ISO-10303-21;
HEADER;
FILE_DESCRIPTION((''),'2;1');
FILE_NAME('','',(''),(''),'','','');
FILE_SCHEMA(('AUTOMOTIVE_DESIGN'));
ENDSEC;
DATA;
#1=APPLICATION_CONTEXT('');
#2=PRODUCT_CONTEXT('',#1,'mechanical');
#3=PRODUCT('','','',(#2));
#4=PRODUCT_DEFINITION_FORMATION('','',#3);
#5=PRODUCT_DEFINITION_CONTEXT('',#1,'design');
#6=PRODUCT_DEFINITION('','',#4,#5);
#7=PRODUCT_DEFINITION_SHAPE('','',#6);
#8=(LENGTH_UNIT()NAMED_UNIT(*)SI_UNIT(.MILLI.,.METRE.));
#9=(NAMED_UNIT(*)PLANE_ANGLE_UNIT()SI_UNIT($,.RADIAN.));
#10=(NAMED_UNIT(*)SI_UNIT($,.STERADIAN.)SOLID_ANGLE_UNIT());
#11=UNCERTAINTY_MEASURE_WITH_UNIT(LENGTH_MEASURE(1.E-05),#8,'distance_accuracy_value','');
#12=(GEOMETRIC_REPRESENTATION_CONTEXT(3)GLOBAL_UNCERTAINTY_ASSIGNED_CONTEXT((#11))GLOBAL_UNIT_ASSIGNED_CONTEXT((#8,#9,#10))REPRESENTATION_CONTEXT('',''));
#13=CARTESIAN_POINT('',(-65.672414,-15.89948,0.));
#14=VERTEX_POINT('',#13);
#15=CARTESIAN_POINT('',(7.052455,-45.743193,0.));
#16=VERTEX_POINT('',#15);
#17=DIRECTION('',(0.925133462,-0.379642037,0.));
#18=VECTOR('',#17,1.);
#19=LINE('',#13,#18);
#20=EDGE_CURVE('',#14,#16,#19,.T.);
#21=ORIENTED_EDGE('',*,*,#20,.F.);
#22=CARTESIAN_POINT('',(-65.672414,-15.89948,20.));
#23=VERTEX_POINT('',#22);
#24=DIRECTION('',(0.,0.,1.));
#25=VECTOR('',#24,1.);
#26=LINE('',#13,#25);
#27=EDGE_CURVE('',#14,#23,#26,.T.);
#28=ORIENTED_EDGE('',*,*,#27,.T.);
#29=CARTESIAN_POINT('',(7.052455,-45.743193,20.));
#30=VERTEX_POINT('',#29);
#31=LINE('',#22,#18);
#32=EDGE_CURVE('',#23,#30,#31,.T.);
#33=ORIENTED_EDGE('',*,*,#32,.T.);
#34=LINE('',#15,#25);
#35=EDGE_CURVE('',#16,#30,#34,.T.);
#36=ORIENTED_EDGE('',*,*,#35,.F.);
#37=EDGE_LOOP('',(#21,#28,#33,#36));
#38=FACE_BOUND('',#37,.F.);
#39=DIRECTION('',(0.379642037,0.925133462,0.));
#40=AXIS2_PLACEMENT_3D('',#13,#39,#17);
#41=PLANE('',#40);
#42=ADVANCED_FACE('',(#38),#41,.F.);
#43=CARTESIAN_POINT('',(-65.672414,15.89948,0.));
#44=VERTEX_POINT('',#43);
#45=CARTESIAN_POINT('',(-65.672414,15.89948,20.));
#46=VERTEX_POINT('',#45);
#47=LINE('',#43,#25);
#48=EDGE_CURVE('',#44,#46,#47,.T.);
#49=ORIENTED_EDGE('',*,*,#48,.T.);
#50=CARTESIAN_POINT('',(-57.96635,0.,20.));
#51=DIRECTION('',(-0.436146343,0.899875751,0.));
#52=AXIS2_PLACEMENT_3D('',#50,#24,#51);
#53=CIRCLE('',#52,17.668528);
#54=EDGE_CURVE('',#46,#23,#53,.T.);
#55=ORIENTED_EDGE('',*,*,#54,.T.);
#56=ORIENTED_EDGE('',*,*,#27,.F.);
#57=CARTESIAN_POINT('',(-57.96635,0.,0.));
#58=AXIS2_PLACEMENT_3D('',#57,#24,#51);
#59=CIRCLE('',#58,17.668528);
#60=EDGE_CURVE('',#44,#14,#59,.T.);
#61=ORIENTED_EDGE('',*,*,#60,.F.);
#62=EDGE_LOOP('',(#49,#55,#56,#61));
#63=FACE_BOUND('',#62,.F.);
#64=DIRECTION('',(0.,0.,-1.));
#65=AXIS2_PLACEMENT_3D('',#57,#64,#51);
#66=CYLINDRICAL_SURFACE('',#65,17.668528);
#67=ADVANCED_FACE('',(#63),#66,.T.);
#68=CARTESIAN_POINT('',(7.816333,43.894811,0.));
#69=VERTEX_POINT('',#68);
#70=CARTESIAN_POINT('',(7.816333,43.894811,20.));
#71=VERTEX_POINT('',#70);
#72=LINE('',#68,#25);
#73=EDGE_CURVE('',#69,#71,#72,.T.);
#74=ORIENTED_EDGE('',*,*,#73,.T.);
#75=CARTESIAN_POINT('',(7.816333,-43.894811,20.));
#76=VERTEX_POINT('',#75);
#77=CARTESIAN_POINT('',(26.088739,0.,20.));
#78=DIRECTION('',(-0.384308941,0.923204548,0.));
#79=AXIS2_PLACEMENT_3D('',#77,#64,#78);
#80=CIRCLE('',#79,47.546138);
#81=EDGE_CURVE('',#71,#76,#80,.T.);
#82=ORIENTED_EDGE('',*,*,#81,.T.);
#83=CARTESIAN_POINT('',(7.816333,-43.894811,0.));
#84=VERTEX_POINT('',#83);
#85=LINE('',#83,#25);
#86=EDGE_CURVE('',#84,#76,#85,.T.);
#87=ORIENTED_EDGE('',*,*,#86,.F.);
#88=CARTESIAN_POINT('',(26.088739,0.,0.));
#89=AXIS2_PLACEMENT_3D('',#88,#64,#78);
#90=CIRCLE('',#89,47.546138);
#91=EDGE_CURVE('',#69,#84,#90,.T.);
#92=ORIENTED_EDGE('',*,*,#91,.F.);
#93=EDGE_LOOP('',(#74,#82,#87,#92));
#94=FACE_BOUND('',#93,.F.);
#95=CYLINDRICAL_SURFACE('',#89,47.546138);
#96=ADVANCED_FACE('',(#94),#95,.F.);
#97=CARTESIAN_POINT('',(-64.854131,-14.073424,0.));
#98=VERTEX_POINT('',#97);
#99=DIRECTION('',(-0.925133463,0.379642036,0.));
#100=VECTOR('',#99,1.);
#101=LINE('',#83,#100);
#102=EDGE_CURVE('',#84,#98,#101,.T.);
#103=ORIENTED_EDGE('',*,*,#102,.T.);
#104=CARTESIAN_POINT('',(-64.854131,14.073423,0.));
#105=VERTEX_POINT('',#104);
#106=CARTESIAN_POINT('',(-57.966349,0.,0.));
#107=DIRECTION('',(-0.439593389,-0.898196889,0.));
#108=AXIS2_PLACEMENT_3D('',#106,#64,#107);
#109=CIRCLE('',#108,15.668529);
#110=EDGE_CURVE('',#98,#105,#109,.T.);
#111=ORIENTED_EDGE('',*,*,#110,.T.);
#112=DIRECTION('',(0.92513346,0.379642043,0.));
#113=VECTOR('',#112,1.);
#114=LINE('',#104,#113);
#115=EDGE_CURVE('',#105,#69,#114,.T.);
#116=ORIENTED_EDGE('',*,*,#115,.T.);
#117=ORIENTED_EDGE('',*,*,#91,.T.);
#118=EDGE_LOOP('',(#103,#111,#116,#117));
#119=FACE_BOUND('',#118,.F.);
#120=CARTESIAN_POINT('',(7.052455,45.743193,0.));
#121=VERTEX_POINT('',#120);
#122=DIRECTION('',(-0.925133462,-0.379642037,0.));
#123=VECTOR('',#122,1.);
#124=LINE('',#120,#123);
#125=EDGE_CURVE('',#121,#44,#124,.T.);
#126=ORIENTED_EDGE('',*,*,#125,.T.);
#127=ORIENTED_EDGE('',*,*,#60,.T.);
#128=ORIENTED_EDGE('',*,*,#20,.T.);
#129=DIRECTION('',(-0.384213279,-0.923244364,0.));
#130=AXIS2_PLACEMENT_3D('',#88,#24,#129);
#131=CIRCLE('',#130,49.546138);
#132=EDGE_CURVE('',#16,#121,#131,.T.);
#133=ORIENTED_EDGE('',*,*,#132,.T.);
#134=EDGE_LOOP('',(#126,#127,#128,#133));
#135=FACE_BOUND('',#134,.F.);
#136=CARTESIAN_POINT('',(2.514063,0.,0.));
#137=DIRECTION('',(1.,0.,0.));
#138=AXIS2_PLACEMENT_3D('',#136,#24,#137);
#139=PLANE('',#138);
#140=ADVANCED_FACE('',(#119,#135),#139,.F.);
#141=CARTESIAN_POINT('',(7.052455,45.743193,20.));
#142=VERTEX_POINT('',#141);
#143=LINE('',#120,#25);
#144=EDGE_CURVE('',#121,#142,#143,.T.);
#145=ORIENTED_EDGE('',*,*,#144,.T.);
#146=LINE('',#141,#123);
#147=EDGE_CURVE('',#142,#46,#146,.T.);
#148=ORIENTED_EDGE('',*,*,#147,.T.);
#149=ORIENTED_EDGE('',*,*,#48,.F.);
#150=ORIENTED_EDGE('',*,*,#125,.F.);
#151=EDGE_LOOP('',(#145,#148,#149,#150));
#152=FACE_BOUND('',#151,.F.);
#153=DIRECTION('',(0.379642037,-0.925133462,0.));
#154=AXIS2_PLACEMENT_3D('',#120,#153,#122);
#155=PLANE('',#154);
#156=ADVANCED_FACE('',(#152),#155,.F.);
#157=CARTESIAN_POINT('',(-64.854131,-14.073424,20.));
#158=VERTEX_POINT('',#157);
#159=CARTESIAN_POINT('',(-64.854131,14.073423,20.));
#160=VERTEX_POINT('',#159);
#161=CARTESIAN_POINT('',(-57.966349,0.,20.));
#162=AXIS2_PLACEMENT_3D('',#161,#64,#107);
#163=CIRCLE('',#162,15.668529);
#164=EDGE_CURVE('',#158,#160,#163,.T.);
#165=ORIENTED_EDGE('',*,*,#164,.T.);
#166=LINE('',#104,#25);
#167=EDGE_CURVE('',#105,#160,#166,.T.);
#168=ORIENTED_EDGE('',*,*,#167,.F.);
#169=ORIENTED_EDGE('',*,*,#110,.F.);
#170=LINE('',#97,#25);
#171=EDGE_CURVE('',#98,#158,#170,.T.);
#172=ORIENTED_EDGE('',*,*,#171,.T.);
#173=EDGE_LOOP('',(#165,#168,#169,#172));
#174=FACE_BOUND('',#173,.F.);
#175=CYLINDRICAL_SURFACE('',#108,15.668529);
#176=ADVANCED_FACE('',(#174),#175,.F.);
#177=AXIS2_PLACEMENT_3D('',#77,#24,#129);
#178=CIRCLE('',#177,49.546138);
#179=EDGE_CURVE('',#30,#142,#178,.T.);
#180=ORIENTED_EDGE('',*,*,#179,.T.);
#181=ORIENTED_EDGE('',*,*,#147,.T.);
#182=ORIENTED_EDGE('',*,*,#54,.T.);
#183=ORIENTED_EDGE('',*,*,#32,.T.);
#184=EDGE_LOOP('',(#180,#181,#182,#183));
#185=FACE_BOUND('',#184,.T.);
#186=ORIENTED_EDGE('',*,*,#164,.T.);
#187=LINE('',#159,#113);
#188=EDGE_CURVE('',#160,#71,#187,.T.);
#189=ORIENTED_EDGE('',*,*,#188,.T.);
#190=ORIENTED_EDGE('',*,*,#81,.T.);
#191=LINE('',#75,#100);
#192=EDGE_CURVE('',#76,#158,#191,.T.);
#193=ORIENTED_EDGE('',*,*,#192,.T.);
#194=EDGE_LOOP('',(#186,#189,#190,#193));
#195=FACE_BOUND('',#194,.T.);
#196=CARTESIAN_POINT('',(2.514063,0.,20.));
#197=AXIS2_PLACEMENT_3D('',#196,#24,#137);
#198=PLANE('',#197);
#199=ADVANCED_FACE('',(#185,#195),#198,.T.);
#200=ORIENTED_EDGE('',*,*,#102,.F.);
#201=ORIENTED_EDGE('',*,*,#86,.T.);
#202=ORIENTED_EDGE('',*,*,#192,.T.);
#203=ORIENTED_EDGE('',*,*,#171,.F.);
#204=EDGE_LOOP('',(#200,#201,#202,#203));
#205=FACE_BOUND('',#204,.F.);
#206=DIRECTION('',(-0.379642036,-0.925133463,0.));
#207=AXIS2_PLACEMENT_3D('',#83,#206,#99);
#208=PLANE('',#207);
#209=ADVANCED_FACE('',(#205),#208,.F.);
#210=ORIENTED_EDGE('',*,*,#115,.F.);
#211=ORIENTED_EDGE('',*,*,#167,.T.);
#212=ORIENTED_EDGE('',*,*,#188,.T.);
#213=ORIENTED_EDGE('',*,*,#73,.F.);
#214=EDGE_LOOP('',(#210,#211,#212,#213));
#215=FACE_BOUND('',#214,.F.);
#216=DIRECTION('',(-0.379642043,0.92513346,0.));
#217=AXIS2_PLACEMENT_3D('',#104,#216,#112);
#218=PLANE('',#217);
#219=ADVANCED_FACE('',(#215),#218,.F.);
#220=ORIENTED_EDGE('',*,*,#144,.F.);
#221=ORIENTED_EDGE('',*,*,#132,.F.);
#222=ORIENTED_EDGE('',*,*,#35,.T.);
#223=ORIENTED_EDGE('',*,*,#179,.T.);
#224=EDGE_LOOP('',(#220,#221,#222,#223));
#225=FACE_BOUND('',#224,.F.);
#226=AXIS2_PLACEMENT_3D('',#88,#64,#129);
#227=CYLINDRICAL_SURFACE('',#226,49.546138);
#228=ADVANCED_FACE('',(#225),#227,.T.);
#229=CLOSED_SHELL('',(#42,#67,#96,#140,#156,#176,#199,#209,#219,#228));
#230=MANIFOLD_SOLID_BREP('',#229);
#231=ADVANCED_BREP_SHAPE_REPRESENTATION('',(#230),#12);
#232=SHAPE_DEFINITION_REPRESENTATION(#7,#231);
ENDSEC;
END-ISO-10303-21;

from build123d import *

# Parameters (mm, degrees)
F1_DEPTH = 20


# Not quite as in the source:
# - ends of sketch curves that miss each other by under 0.0002 mm in the source are joined


with BuildPart() as f1:
    # F0 (on Top) → F1 (new body)
    with BuildSketch(Plane.XY):
        with BuildLine():
            Line((7.0524548533, 45.7431926804), (-65.6724138707, 15.8994799068))
            ThreePointArc((-65.6724138707, 15.8994799068), (-75.634878, 0), (-65.6724138707, -15.8994799068))
            Line((-65.6724138707, -15.8994799068), (7.0524548533, -45.7431926804))
            ThreePointArc((7.0524548533, -45.7431926804), (75.634877, 0), (7.0524548533, 45.7431926804))
        make_face()
        with BuildLine():
            ThreePointArc((7.8163330608, 43.894810854), (73.634877, 0), (7.8163330608, -43.894810854))
            Line((7.8163330608, -43.894810854), (-64.854131, -14.073424))
            ThreePointArc((-64.854131, -14.073424), (-73.634878, 0), (-64.8541307124, 14.0734234124))
            Line((-64.8541307124, 14.0734234124), (7.8163330608, 43.894810854))
        make_face(mode=Mode.SUBTRACT)
    extrude(amount=F1_DEPTH)


solid = f1.part
